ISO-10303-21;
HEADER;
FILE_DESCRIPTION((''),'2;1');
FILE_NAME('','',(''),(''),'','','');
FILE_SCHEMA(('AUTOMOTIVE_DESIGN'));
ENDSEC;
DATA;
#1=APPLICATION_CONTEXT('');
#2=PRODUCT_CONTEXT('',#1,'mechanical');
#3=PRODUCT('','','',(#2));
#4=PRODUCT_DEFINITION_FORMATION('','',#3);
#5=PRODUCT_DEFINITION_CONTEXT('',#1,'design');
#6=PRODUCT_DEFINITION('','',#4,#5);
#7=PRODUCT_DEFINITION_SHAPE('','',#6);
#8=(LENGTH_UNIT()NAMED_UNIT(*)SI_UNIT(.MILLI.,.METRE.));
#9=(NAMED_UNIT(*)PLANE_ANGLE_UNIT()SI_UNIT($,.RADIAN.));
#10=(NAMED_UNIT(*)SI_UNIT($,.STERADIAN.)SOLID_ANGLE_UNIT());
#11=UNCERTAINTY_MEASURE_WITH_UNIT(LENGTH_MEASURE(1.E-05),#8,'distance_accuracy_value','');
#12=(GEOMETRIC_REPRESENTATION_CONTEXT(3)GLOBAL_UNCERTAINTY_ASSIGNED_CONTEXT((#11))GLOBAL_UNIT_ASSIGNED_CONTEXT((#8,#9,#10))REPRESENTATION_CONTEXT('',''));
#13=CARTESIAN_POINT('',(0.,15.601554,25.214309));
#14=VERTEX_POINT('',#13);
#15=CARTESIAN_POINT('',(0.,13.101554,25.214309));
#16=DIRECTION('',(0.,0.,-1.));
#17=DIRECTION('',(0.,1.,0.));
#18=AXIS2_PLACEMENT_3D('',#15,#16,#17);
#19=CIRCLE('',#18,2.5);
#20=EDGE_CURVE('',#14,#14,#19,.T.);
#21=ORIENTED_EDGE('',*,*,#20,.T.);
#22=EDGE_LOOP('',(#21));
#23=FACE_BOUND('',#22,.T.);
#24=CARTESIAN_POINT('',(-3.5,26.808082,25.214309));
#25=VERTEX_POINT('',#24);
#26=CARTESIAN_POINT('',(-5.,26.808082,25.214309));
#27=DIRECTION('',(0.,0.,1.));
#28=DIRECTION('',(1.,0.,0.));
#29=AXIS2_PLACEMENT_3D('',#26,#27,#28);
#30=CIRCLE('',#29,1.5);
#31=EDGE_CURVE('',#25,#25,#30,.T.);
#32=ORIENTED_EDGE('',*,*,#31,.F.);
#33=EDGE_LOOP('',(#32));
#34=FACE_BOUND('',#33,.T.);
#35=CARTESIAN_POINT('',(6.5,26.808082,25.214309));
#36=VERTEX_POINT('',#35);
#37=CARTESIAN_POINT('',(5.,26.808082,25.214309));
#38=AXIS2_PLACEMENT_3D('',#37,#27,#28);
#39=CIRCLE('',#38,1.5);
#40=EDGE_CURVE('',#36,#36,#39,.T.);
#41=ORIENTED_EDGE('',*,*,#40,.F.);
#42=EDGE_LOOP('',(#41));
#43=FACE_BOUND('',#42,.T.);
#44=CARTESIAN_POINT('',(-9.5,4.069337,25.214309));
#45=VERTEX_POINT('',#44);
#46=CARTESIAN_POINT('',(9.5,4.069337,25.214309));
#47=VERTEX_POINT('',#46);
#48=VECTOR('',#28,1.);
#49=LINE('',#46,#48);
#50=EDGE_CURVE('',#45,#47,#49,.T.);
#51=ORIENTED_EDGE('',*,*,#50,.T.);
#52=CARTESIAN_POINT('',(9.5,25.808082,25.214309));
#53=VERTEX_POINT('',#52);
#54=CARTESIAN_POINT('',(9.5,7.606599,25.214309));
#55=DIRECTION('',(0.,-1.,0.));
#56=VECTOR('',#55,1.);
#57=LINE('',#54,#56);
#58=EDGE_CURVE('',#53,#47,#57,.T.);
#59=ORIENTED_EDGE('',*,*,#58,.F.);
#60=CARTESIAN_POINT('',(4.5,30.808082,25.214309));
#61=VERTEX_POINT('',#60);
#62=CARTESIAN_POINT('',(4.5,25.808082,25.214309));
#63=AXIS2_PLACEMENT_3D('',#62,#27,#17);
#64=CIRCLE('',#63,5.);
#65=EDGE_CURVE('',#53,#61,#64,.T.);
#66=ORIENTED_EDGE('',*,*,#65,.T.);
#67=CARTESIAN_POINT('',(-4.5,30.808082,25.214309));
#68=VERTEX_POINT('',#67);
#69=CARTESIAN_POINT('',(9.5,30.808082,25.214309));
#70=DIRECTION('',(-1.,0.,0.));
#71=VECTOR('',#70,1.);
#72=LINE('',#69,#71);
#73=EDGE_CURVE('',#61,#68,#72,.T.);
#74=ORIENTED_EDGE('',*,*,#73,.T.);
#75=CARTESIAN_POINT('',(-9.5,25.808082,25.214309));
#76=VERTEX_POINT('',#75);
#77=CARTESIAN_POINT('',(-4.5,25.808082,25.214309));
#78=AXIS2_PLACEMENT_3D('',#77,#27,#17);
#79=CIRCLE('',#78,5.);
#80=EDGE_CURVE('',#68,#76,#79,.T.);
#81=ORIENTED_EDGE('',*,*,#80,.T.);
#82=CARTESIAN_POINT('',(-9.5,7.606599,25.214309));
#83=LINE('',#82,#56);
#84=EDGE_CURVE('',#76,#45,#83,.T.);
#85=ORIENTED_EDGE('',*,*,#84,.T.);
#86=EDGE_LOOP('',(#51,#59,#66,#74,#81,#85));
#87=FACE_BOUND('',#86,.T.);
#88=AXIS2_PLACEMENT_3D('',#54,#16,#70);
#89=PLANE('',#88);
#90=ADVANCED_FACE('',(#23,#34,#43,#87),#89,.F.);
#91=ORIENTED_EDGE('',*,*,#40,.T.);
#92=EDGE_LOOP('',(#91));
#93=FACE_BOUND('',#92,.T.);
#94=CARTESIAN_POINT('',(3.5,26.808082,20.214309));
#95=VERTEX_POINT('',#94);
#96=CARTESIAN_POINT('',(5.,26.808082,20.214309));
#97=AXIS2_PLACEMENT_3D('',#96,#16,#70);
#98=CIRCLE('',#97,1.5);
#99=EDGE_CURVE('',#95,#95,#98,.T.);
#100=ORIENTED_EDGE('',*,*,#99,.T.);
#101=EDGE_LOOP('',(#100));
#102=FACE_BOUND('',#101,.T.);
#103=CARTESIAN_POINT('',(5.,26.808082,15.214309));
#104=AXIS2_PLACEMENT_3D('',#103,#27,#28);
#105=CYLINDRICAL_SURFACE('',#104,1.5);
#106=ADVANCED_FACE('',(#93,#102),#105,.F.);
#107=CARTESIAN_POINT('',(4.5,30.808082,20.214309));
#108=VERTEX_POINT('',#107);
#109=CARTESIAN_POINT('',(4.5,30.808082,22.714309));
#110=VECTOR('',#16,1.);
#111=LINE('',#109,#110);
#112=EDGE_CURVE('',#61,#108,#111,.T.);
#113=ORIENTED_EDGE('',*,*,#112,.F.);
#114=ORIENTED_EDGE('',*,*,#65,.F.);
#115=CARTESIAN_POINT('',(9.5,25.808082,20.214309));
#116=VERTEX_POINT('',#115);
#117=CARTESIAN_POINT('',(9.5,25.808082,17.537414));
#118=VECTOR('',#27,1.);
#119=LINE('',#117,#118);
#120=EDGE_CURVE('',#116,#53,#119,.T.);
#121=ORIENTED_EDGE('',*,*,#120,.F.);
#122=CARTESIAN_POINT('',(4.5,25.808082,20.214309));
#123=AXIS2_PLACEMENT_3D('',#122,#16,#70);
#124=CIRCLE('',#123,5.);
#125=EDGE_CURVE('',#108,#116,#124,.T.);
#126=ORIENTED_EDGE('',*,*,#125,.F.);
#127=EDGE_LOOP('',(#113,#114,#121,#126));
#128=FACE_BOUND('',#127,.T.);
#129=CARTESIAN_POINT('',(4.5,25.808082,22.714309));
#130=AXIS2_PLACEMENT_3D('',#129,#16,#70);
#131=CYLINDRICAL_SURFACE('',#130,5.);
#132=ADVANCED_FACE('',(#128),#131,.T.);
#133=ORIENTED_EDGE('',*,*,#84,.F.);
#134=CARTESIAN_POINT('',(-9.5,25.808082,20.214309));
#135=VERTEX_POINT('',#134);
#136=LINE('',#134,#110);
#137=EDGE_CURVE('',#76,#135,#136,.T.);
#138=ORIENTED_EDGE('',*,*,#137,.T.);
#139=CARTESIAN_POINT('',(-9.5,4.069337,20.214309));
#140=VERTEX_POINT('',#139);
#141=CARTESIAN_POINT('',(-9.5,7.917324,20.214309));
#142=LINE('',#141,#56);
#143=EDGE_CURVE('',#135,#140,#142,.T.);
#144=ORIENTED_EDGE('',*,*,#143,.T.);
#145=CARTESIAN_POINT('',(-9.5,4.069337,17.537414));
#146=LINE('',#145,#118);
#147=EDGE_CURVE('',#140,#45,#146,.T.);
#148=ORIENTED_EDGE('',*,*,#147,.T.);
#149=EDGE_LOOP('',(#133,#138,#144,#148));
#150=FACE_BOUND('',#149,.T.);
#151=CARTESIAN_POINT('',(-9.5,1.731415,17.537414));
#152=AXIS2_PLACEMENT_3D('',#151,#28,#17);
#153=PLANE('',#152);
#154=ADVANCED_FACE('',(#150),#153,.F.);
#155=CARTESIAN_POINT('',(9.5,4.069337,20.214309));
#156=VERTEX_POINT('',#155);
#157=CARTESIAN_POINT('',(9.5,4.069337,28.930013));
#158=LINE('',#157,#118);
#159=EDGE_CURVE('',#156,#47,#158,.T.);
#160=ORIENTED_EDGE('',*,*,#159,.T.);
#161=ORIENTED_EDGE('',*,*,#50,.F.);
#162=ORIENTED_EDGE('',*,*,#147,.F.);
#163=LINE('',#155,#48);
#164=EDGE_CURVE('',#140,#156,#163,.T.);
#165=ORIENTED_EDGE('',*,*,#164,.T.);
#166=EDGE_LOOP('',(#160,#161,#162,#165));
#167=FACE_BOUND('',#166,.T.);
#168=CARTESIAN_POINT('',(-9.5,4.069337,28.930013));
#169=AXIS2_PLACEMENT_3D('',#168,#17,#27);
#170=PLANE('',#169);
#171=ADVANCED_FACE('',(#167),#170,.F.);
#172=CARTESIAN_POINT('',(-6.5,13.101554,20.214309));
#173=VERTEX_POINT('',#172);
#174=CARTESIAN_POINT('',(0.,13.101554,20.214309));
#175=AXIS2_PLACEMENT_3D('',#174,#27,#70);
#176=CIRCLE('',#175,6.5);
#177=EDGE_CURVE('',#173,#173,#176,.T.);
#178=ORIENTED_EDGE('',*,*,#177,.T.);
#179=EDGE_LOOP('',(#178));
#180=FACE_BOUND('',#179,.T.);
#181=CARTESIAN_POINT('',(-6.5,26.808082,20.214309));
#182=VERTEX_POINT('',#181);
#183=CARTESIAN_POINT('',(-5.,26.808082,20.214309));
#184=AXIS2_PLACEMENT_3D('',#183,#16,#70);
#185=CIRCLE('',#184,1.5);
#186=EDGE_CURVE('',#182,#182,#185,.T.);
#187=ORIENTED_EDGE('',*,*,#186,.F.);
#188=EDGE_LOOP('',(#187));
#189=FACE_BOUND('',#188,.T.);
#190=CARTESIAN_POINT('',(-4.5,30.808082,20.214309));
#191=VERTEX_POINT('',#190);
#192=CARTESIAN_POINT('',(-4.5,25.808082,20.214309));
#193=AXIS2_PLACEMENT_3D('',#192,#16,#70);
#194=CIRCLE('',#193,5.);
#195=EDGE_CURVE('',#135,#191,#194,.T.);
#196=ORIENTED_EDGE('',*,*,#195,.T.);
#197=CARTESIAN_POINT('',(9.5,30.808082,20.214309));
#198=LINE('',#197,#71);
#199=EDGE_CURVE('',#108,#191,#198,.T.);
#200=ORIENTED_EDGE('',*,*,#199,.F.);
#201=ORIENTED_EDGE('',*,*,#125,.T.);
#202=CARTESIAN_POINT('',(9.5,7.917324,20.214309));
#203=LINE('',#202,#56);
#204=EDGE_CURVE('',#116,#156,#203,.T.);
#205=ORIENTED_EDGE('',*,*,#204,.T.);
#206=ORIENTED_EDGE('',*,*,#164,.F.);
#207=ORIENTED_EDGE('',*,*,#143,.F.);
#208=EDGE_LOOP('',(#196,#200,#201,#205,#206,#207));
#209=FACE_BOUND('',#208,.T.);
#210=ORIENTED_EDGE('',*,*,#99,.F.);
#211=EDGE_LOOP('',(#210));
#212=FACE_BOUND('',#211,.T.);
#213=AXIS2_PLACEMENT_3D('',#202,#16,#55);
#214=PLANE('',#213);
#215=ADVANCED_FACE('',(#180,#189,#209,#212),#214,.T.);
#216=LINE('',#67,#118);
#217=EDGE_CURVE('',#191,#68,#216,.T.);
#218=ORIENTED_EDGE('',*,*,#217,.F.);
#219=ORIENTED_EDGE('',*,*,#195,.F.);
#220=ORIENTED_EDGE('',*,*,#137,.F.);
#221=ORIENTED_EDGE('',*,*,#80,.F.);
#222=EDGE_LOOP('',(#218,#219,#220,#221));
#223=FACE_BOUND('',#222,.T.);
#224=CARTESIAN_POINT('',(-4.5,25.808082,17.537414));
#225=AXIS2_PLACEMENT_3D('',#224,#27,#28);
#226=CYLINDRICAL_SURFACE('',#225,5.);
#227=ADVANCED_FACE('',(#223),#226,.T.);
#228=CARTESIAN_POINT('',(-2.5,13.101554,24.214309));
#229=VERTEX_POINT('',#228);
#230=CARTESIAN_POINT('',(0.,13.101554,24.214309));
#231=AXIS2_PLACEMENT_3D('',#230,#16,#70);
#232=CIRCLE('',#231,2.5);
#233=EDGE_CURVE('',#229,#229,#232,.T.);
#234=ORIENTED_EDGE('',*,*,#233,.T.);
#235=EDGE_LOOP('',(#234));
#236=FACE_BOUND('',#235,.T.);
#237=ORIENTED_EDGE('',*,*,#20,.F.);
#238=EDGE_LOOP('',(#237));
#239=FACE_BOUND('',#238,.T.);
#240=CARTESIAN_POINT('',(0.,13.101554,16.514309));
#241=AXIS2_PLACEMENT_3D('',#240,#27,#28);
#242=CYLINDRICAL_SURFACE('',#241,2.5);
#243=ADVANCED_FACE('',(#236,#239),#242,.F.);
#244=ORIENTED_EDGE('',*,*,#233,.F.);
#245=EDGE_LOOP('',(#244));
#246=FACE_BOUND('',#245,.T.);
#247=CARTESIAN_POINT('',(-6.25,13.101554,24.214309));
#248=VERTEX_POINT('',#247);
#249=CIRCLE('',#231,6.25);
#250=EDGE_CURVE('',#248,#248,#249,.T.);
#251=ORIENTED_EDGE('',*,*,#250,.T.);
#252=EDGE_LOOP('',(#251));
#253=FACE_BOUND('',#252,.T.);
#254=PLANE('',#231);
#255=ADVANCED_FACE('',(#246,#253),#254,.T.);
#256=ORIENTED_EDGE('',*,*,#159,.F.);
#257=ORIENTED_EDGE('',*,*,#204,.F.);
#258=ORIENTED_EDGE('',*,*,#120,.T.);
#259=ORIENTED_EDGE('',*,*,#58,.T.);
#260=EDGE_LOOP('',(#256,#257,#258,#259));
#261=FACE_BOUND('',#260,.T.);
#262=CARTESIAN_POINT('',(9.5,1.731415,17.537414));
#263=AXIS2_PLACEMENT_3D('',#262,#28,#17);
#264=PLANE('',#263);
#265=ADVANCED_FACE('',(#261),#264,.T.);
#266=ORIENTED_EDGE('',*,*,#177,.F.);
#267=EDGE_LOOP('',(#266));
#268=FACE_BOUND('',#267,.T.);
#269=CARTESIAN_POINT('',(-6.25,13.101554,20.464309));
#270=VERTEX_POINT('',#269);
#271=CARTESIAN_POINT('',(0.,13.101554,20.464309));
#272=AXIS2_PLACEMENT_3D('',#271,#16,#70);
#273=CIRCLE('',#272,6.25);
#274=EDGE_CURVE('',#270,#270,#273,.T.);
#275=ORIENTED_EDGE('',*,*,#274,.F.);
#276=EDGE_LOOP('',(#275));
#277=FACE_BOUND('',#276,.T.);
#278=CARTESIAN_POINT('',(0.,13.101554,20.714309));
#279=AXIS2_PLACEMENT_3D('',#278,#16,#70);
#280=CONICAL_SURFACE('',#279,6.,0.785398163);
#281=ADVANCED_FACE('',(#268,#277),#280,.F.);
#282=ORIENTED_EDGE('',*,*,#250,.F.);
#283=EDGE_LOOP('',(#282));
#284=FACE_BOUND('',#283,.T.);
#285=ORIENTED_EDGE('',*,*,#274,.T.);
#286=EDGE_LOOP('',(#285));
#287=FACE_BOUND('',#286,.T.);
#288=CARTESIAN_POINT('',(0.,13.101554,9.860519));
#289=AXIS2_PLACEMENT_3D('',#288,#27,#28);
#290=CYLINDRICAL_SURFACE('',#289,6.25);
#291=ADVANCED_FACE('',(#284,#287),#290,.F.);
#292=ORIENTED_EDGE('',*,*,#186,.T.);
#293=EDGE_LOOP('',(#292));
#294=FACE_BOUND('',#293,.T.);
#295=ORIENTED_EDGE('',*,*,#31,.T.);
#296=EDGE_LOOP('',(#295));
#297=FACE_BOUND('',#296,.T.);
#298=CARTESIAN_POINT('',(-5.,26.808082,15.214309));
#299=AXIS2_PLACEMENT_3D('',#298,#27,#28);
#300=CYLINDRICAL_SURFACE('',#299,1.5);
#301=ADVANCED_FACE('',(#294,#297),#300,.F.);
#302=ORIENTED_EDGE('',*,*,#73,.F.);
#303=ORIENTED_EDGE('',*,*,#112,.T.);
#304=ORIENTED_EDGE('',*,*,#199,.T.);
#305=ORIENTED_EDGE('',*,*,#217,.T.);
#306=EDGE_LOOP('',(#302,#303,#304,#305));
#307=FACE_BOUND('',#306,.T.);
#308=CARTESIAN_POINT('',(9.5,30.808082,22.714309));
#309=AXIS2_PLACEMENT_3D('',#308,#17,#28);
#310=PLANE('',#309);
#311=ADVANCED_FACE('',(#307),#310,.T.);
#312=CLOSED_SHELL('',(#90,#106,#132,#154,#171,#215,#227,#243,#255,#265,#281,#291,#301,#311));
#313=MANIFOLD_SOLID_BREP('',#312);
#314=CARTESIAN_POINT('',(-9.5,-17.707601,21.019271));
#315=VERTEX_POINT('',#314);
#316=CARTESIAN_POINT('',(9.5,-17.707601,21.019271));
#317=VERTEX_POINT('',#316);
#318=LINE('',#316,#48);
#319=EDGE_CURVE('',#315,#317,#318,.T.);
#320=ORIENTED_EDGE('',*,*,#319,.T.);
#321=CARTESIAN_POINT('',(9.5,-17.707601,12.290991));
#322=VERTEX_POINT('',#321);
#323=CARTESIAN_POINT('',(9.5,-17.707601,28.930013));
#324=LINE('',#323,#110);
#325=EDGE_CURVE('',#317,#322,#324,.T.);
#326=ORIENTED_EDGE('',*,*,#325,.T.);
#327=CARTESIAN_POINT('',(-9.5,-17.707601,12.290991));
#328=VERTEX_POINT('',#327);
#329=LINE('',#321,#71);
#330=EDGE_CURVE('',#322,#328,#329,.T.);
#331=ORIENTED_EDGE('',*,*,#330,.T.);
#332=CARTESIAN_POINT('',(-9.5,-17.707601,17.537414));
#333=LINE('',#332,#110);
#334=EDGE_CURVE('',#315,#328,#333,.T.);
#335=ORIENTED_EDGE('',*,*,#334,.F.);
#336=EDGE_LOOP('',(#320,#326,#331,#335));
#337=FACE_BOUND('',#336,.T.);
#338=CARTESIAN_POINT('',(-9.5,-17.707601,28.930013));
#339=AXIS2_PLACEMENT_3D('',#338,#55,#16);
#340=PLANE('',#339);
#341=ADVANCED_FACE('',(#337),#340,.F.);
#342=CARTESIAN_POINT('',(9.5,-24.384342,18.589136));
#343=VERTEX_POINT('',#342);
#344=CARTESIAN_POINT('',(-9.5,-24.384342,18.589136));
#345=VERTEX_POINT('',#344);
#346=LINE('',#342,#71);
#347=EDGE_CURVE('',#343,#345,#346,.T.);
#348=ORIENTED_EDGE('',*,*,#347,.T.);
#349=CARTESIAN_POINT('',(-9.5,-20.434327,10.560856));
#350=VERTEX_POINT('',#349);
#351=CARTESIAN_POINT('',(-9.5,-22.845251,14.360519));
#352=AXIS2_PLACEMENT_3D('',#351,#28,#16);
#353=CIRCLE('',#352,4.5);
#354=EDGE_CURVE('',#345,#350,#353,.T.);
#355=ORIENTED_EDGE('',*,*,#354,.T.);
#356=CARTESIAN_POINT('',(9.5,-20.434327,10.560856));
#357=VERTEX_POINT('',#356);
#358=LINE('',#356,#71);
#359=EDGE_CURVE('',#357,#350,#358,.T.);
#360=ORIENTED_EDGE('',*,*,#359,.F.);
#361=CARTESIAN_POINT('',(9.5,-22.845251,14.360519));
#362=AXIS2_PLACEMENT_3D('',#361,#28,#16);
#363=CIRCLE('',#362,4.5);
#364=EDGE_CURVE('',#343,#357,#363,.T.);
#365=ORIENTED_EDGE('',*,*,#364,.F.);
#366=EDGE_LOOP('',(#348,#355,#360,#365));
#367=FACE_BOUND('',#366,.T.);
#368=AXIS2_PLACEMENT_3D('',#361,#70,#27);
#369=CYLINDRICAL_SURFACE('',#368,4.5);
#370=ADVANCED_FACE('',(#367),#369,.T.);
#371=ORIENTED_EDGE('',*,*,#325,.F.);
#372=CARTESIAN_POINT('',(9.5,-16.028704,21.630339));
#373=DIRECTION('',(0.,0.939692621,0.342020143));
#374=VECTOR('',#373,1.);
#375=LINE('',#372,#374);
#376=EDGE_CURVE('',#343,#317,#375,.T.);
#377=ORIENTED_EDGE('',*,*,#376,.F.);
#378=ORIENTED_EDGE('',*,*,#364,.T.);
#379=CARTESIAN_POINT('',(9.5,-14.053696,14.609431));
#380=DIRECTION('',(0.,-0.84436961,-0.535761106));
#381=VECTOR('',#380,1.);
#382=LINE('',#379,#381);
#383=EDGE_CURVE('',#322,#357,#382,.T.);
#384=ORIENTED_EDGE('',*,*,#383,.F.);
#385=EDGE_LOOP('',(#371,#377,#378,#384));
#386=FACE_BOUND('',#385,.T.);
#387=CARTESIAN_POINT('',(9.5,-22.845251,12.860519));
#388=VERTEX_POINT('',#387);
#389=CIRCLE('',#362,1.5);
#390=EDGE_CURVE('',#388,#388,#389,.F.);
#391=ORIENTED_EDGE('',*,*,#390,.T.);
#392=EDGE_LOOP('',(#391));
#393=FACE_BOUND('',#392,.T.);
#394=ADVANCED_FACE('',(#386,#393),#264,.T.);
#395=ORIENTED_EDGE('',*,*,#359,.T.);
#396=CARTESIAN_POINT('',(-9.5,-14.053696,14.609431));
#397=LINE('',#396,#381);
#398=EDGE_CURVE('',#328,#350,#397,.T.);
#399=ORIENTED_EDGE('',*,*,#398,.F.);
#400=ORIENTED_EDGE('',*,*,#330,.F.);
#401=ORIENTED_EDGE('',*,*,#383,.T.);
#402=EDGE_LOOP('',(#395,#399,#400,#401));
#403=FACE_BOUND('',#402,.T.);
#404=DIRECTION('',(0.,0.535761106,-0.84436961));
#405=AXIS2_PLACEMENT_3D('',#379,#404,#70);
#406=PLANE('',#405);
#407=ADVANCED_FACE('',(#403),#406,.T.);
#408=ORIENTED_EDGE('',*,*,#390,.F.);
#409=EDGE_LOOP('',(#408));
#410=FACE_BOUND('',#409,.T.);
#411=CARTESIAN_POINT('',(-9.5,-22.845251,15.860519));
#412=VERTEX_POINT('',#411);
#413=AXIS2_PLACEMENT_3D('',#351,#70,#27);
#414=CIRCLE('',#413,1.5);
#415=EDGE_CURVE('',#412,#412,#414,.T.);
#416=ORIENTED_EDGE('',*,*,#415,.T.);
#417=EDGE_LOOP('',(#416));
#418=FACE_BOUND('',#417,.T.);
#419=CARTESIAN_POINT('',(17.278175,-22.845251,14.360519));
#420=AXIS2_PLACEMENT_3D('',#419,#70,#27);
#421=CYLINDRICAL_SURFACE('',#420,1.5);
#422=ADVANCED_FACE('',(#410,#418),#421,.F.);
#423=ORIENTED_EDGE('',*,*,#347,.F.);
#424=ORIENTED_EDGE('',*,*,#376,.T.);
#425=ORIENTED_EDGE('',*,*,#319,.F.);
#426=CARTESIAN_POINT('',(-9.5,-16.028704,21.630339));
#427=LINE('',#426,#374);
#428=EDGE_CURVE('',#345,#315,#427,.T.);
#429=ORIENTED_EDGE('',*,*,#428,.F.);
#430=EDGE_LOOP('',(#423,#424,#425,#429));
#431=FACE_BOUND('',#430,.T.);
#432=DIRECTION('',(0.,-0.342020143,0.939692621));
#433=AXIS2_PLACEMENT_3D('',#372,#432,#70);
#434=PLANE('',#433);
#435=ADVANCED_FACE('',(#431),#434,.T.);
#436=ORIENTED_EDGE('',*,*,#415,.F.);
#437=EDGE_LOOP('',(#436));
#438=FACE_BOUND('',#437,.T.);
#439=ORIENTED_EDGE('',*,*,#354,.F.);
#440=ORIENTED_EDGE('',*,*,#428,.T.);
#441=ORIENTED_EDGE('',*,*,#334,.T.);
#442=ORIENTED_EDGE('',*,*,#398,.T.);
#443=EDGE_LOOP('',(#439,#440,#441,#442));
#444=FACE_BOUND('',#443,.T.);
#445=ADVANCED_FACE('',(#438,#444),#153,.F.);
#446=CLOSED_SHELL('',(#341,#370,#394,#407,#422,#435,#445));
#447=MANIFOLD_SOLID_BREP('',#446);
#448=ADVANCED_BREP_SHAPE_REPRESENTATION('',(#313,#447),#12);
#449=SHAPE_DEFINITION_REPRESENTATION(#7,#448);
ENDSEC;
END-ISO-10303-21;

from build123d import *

# Parameters (mm, degrees)
BOSS_EXTRUDE1_START       = -0.8
BOSS_EXTRUDE1_OUTLINE_R   = 6
BOSS_EXTRUDE1_OUTLINE_R_2 = 2.5
BOSS_EXTRUDE1_DEPTH       = 1
BOSS_EXTRUDE1_START_2     = -9.5
BOSS_EXTRUDE1_2_OUTLINE_R = 2.75
BOSS_EXTRUDE1_2_DEPTH     = 19
BOSS_EXTRUDE1_START_3     = 20.214309477
BOSS_EXTRUDE1_3_OUTLINE_R = 1.25
BOSS_EXTRUDE1_3_DEPTH     = 5
SKETCH2_R                 = 6.25
CUT_EXTRUDE1_DEPTH        = 36.290497761
SKETCH3_R                 = 1.5
CUT_EXTRUDE2_DEPTH        = 10
SKETCH4_R                 = 2.75
SKETCH4_R_2               = 1.5
BOSS_EXTRUDE2_DEPTH       = 19
SKETCH5_W                 = 19.788266816
SKETCH5_H                 = 21.776938083
CUT_EXTRUDE3_DEPTH        = 45.112349032


with BuildPart() as part:
    # Boss-Extrude1: read off the stored shape, not the designer's step
    # Boss-Extrude1 outline → Boss-Extrude1 (new body)
    with BuildSketch(Plane(origin=(0, 0, 24.414309477), x_dir=(-1, 0, 0), z_dir=(0, 0, -1)).offset(BOSS_EXTRUDE1_START)):
        with Locations((0, 13.101553709)):
            Circle(BOSS_EXTRUDE1_OUTLINE_R)
        with Locations((0, 13.101553709)):
            Circle(BOSS_EXTRUDE1_OUTLINE_R_2, mode=Mode.SUBTRACT)
    extrude(amount=BOSS_EXTRUDE1_DEPTH)

    # Boss-Extrude1 2 outline → Boss-Extrude1 2 (add)
    with BuildSketch(Plane.YZ.offset(BOSS_EXTRUDE1_START_2)):
        with BuildLine():
            Line((30.808082296, 25.214309477), (-4.594884555, 25.214309477))
            ThreePointArc((-4.594884555, 25.214309477), (-6.157718154, 25.077579254), (-7.673065845, 24.671543064))
            Line((-7.673065845, 24.671543064), (-24.384342131, 18.58913592))
            ThreePointArc((-24.384342131, 18.58913592), (-26.882991431, 12.373899853), (-20.43432651, 10.560855883))
            Line((-20.43432651, 10.560855883), (-7.673065845, 18.658005573))
            ThreePointArc((-7.673065845, 18.658005573), (-5.104992299, 19.817354852), (-2.315454789, 20.214309477))
            Line((-2.315454789, 20.214309477), (30.808082296, 20.214309477))
            Line((30.808082296, 20.214309477), (30.808082296, 25.214309477))
        make_face()
        with Locations((-22.845251486, 14.360519126)):
            Circle(BOSS_EXTRUDE1_2_OUTLINE_R, mode=Mode.SUBTRACT)
    extrude(amount=BOSS_EXTRUDE1_2_DEPTH)

    # Boss-Extrude1 3 outline → Boss-Extrude1 3 (cut)
    with BuildSketch(Plane.XY.offset(BOSS_EXTRUDE1_START_3)):
        with BuildLine():
            ThreePointArc((-9.5, 25.808082296), (-8.035533906, 29.343616202), (-4.5, 30.808082296))
            Line((-4.5, 30.808082296), (-9.5, 30.808082296))
            Line((-9.5, 30.808082296), (-9.5, 25.808082296))
        make_face()
        with BuildLine():
            Line((9.5, 30.808082296), (4.5, 30.808082296))
            ThreePointArc((4.5, 30.808082296), (8.035533906, 29.343616202), (9.5, 25.808082296))
            Line((9.5, 25.808082296), (9.5, 30.808082296))
        make_face()
        with Locations((5, 26.808082296)):
            Circle(BOSS_EXTRUDE1_3_OUTLINE_R)
        with Locations((-5, 26.808082296)):
            Circle(BOSS_EXTRUDE1_3_OUTLINE_R)
    extrude(amount=BOSS_EXTRUDE1_3_DEPTH, mode=Mode.SUBTRACT)

    # Boss-Extrude1 4 outline → Boss-Extrude1 4 (revolve, cut)
    with BuildSketch(Plane.XZ.offset(-13.101553709)):
        Polygon((6, 20.714309477), (6, 24.214309477), (2.5, 24.214309477), (2.5, 25.214309477), (0, 25.214309477), (0, 20.214309477), (6.5, 20.214309477), align=None)
    revolve(axis=Axis((0, 13.101553709, 0), (0, 0, 1)), mode=Mode.SUBTRACT)

    # Sketch2 → Cut-Extrude1 (cut, through all)
    with BuildSketch(Plane(origin=(0, 0, 24.214309477), x_dir=(-1, 0, 0), z_dir=(0, 0, -1))):
        with Locations((0, 13.101553709)):
            Circle(SKETCH2_R)
    extrude(amount=CUT_EXTRUDE1_DEPTH, mode=Mode.SUBTRACT)

    # Sketch3 → Cut-Extrude2 (cut)
    with BuildSketch(Plane.XY.offset(25.214309477)):
        with Locations((-5, 26.808082296)):
            Circle(SKETCH3_R)
        with Locations((5, 26.808082296)):
            Circle(SKETCH3_R)
    extrude(amount=-CUT_EXTRUDE2_DEPTH, mode=Mode.SUBTRACT)

    # Sketch4 → Boss-Extrude2 (add)
    with BuildSketch(Plane.ZY.offset(9.5)):
        with Locations((14.360519126, -22.845251486)):
            Circle(SKETCH4_R)
        with Locations((14.360519126, -22.845251486)):
            Circle(SKETCH4_R_2, mode=Mode.SUBTRACT)
    extrude(amount=-BOSS_EXTRUDE2_DEPTH)

    # Sketch5 → Cut-Extrude3 (cut, through all)
    with BuildSketch(Plane(origin=(9.5, 0, 0), x_dir=(0, 0, -1), z_dir=(1, 0, 0))):
        with Locations((-19.035879135, -6.819131606)):
            Rectangle(SKETCH5_W, SKETCH5_H)
    extrude(amount=-CUT_EXTRUDE3_DEPTH, mode=Mode.SUBTRACT)


with BuildPart() as cut_extrude3_piece_1:
    # of the separate pieces the step leaves, piece 1, a body of its own (cut_extrude3_pieces)
    add(part.part.solids().sort_by_distance((-9.5, 25.808082296, 25.214309477))[0])


with BuildPart() as cut_extrude3_piece_2:
    # of the separate pieces the step leaves, piece 2, a body of its own (cut_extrude3_pieces)
    add(part.part.solids().sort_by_distance((-9.5, -20.43432651, 10.560855883))[0])


solid = Compound([cut_extrude3_piece_1.part, cut_extrude3_piece_2.part])
